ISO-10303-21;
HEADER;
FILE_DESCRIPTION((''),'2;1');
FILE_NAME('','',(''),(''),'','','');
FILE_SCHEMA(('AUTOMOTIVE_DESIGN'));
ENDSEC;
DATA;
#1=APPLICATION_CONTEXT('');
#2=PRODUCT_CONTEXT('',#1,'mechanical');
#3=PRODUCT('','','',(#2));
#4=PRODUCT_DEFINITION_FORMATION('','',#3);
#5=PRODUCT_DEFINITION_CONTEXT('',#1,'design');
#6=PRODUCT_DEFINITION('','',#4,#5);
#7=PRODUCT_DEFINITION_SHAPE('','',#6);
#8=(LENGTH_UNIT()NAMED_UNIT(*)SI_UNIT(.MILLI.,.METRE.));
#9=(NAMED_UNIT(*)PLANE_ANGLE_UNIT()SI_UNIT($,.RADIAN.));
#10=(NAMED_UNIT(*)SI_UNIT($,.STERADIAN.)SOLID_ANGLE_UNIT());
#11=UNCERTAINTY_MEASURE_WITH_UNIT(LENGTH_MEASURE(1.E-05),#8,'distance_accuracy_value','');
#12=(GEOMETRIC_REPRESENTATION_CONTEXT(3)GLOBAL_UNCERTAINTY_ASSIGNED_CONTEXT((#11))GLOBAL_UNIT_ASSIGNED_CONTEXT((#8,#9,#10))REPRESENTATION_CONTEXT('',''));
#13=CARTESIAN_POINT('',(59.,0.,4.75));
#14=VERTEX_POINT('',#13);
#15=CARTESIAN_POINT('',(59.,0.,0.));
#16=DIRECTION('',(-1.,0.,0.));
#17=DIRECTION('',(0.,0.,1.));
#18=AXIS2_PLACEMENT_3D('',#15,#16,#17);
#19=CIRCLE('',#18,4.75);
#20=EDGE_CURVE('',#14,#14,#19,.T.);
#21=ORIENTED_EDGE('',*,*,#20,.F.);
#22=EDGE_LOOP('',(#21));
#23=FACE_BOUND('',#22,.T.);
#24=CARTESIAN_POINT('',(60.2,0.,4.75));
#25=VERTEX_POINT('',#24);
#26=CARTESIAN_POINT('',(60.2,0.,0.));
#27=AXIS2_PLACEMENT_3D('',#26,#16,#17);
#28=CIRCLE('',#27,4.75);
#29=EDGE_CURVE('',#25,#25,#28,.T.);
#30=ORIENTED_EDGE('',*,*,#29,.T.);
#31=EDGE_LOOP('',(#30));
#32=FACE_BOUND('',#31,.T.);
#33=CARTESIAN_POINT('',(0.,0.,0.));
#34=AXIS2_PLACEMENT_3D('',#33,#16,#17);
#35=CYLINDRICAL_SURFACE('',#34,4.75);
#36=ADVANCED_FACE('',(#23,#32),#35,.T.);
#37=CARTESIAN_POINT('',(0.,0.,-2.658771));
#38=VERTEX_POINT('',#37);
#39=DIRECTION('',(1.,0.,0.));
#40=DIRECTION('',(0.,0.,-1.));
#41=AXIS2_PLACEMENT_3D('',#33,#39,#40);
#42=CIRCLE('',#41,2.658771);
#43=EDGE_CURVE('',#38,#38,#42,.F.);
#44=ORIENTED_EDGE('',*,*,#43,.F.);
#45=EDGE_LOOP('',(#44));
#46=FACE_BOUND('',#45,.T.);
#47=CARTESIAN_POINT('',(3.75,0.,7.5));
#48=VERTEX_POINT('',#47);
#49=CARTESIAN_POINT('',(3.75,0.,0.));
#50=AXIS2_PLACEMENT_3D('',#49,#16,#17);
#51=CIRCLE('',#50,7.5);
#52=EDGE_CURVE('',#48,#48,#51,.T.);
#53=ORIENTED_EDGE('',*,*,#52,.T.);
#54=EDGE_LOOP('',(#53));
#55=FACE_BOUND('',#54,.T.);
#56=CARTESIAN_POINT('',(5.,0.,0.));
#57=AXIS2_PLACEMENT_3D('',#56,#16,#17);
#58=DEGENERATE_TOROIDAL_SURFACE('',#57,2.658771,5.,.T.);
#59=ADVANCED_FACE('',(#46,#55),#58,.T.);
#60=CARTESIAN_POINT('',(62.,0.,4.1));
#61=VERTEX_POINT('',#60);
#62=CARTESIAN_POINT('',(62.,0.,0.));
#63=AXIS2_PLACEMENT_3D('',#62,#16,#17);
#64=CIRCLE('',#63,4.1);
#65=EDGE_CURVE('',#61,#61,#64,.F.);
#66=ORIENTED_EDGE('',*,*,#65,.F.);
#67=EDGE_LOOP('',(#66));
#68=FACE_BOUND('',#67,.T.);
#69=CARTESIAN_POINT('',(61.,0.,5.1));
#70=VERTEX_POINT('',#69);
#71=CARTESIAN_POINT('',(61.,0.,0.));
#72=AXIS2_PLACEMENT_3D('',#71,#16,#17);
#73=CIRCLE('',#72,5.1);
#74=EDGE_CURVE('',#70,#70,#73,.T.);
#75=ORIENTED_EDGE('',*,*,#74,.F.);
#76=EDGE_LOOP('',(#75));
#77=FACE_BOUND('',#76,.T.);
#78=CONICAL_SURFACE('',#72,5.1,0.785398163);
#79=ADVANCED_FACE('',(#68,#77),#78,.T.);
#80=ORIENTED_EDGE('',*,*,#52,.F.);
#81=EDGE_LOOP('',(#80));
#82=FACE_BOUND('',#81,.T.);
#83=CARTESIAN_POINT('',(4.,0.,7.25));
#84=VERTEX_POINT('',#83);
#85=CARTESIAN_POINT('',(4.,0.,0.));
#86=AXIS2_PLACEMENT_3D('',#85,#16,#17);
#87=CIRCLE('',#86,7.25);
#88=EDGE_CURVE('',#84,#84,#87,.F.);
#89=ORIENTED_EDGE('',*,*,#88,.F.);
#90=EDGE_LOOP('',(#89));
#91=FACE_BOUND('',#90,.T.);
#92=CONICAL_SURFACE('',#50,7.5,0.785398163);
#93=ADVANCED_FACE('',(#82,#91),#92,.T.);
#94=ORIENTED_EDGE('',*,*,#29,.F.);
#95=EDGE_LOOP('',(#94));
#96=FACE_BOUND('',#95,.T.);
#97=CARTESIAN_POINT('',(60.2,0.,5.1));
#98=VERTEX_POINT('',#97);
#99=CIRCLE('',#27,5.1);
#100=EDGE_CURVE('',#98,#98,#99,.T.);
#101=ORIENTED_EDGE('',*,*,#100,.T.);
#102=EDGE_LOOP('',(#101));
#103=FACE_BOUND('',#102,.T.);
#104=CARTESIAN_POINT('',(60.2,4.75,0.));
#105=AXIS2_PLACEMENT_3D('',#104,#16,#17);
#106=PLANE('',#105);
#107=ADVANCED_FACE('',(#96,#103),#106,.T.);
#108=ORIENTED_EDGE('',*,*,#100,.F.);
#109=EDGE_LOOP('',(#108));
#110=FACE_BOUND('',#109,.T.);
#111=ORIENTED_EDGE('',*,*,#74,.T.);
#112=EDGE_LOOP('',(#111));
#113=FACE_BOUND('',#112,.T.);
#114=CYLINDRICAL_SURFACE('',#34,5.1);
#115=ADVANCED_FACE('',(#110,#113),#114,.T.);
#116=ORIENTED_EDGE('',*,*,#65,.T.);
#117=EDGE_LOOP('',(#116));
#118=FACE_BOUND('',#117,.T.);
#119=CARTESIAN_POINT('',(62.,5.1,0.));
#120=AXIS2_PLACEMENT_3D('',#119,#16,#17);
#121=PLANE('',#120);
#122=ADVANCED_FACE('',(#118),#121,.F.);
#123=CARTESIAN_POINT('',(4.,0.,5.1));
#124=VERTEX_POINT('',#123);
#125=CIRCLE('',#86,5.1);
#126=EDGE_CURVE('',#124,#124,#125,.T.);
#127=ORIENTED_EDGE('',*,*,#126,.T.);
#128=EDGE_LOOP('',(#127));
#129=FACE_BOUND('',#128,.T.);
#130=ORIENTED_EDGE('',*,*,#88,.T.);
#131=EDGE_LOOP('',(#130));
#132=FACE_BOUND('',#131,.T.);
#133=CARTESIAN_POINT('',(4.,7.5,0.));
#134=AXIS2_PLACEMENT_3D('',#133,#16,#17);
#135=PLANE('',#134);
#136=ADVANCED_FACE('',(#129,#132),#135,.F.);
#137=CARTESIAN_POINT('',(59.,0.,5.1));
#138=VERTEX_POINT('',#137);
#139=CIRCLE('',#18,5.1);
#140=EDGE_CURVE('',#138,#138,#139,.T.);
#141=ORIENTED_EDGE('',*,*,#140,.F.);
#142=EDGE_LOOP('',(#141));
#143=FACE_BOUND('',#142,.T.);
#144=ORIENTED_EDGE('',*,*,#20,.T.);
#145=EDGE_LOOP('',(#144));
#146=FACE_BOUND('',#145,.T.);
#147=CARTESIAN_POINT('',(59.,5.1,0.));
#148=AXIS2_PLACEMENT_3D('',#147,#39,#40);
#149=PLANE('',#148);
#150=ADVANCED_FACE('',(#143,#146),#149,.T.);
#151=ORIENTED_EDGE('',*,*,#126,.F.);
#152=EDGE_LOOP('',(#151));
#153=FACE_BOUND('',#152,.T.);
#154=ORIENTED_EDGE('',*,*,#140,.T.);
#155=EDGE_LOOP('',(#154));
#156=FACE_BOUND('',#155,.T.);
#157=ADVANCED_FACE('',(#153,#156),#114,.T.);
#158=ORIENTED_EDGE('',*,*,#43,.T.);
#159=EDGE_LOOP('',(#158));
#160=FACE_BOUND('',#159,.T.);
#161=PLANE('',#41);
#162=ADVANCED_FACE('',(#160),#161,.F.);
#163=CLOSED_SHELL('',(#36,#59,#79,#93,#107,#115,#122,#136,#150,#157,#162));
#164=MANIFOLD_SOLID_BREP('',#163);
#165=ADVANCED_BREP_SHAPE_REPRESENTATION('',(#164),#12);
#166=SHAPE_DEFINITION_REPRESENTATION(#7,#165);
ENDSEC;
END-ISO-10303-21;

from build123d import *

# Parameters (mm, degrees)
CHAMFER_1_SIZE = 0.25
SKETCH_2_W     = 1.2
SKETCH_2_H     = 0.35
FILLET_1_R     = 5
CHAMFER_2_SIZE = 1


with BuildPart() as part:
    # Эскиз1 → Повернуть1 (revolve)
    with BuildSketch(Plane.XY, mode=Mode.PRIVATE) as revolve_1_sk:
        Polygon((0, 0), (0, 7.5), (4, 7.5), (4, 5.1), (62, 5.1), (62, 0), align=None)
    revolve(revolve_1_sk.sketch.rotate(Axis((0, 0, 0), (1, 0, 0)), 90), axis=Axis((0, 0, 0), (1, 0, 0)))

    # Фаска1
    chamfer_1_edges = [part.edges().sort_by_distance(p)[0] for p in [
        (4, 0, -7.5),
    ]]
    chamfer(chamfer_1_edges, length=CHAMFER_1_SIZE)

    # Эскиз2 → Вырез-Повернуть1 (revolve, cut)
    with BuildSketch(Plane.XY, mode=Mode.PRIVATE) as cut_revolve_1_sk:
        with Locations((59.6, 4.925)):
            Rectangle(SKETCH_2_W, SKETCH_2_H)
    revolve(cut_revolve_1_sk.sketch.rotate(Axis((0, 0, 0), (1, 0, 0)), 90), axis=Axis((0, 0, 0), (1, 0, 0)), mode=Mode.SUBTRACT)

    # Скругление1
    # the kernel refuses this fillet: 5 mm, written as the material it takes off along each edge
    with BuildSketch(Plane(origin=(0, 0, 0), x_dir=(0, 0, 1), z_dir=(0, 1, 0))) as fillet_1_piece_1:
        with BuildLine():
            CenterArc((2.658770817, 5), FILLET_1_R, 270, 75.522487814)
            Line((2.658770817, 0), (2.658770817, -0.1))
            Line((2.658770817, -0.1), (7.5, -0.1))
            Line((7.5, -0.1), (7.6, 0))
            ThreePointArc((7.6, 0), (7.6, 1.875), (7.596824584, 3.725))
            Line((7.596824584, 3.725), (7.5, 3.75))
        make_face()
    revolve(axis=Axis((0, 0, 0), (1, 0, 0)), mode=Mode.SUBTRACT)

    # Фаска2
    chamfer_2_edges = [part.edges().sort_by_distance(p)[0] for p in [
        (62, 0, -5.1),
    ]]
    chamfer(chamfer_2_edges, length=CHAMFER_2_SIZE)


solid = part.part
